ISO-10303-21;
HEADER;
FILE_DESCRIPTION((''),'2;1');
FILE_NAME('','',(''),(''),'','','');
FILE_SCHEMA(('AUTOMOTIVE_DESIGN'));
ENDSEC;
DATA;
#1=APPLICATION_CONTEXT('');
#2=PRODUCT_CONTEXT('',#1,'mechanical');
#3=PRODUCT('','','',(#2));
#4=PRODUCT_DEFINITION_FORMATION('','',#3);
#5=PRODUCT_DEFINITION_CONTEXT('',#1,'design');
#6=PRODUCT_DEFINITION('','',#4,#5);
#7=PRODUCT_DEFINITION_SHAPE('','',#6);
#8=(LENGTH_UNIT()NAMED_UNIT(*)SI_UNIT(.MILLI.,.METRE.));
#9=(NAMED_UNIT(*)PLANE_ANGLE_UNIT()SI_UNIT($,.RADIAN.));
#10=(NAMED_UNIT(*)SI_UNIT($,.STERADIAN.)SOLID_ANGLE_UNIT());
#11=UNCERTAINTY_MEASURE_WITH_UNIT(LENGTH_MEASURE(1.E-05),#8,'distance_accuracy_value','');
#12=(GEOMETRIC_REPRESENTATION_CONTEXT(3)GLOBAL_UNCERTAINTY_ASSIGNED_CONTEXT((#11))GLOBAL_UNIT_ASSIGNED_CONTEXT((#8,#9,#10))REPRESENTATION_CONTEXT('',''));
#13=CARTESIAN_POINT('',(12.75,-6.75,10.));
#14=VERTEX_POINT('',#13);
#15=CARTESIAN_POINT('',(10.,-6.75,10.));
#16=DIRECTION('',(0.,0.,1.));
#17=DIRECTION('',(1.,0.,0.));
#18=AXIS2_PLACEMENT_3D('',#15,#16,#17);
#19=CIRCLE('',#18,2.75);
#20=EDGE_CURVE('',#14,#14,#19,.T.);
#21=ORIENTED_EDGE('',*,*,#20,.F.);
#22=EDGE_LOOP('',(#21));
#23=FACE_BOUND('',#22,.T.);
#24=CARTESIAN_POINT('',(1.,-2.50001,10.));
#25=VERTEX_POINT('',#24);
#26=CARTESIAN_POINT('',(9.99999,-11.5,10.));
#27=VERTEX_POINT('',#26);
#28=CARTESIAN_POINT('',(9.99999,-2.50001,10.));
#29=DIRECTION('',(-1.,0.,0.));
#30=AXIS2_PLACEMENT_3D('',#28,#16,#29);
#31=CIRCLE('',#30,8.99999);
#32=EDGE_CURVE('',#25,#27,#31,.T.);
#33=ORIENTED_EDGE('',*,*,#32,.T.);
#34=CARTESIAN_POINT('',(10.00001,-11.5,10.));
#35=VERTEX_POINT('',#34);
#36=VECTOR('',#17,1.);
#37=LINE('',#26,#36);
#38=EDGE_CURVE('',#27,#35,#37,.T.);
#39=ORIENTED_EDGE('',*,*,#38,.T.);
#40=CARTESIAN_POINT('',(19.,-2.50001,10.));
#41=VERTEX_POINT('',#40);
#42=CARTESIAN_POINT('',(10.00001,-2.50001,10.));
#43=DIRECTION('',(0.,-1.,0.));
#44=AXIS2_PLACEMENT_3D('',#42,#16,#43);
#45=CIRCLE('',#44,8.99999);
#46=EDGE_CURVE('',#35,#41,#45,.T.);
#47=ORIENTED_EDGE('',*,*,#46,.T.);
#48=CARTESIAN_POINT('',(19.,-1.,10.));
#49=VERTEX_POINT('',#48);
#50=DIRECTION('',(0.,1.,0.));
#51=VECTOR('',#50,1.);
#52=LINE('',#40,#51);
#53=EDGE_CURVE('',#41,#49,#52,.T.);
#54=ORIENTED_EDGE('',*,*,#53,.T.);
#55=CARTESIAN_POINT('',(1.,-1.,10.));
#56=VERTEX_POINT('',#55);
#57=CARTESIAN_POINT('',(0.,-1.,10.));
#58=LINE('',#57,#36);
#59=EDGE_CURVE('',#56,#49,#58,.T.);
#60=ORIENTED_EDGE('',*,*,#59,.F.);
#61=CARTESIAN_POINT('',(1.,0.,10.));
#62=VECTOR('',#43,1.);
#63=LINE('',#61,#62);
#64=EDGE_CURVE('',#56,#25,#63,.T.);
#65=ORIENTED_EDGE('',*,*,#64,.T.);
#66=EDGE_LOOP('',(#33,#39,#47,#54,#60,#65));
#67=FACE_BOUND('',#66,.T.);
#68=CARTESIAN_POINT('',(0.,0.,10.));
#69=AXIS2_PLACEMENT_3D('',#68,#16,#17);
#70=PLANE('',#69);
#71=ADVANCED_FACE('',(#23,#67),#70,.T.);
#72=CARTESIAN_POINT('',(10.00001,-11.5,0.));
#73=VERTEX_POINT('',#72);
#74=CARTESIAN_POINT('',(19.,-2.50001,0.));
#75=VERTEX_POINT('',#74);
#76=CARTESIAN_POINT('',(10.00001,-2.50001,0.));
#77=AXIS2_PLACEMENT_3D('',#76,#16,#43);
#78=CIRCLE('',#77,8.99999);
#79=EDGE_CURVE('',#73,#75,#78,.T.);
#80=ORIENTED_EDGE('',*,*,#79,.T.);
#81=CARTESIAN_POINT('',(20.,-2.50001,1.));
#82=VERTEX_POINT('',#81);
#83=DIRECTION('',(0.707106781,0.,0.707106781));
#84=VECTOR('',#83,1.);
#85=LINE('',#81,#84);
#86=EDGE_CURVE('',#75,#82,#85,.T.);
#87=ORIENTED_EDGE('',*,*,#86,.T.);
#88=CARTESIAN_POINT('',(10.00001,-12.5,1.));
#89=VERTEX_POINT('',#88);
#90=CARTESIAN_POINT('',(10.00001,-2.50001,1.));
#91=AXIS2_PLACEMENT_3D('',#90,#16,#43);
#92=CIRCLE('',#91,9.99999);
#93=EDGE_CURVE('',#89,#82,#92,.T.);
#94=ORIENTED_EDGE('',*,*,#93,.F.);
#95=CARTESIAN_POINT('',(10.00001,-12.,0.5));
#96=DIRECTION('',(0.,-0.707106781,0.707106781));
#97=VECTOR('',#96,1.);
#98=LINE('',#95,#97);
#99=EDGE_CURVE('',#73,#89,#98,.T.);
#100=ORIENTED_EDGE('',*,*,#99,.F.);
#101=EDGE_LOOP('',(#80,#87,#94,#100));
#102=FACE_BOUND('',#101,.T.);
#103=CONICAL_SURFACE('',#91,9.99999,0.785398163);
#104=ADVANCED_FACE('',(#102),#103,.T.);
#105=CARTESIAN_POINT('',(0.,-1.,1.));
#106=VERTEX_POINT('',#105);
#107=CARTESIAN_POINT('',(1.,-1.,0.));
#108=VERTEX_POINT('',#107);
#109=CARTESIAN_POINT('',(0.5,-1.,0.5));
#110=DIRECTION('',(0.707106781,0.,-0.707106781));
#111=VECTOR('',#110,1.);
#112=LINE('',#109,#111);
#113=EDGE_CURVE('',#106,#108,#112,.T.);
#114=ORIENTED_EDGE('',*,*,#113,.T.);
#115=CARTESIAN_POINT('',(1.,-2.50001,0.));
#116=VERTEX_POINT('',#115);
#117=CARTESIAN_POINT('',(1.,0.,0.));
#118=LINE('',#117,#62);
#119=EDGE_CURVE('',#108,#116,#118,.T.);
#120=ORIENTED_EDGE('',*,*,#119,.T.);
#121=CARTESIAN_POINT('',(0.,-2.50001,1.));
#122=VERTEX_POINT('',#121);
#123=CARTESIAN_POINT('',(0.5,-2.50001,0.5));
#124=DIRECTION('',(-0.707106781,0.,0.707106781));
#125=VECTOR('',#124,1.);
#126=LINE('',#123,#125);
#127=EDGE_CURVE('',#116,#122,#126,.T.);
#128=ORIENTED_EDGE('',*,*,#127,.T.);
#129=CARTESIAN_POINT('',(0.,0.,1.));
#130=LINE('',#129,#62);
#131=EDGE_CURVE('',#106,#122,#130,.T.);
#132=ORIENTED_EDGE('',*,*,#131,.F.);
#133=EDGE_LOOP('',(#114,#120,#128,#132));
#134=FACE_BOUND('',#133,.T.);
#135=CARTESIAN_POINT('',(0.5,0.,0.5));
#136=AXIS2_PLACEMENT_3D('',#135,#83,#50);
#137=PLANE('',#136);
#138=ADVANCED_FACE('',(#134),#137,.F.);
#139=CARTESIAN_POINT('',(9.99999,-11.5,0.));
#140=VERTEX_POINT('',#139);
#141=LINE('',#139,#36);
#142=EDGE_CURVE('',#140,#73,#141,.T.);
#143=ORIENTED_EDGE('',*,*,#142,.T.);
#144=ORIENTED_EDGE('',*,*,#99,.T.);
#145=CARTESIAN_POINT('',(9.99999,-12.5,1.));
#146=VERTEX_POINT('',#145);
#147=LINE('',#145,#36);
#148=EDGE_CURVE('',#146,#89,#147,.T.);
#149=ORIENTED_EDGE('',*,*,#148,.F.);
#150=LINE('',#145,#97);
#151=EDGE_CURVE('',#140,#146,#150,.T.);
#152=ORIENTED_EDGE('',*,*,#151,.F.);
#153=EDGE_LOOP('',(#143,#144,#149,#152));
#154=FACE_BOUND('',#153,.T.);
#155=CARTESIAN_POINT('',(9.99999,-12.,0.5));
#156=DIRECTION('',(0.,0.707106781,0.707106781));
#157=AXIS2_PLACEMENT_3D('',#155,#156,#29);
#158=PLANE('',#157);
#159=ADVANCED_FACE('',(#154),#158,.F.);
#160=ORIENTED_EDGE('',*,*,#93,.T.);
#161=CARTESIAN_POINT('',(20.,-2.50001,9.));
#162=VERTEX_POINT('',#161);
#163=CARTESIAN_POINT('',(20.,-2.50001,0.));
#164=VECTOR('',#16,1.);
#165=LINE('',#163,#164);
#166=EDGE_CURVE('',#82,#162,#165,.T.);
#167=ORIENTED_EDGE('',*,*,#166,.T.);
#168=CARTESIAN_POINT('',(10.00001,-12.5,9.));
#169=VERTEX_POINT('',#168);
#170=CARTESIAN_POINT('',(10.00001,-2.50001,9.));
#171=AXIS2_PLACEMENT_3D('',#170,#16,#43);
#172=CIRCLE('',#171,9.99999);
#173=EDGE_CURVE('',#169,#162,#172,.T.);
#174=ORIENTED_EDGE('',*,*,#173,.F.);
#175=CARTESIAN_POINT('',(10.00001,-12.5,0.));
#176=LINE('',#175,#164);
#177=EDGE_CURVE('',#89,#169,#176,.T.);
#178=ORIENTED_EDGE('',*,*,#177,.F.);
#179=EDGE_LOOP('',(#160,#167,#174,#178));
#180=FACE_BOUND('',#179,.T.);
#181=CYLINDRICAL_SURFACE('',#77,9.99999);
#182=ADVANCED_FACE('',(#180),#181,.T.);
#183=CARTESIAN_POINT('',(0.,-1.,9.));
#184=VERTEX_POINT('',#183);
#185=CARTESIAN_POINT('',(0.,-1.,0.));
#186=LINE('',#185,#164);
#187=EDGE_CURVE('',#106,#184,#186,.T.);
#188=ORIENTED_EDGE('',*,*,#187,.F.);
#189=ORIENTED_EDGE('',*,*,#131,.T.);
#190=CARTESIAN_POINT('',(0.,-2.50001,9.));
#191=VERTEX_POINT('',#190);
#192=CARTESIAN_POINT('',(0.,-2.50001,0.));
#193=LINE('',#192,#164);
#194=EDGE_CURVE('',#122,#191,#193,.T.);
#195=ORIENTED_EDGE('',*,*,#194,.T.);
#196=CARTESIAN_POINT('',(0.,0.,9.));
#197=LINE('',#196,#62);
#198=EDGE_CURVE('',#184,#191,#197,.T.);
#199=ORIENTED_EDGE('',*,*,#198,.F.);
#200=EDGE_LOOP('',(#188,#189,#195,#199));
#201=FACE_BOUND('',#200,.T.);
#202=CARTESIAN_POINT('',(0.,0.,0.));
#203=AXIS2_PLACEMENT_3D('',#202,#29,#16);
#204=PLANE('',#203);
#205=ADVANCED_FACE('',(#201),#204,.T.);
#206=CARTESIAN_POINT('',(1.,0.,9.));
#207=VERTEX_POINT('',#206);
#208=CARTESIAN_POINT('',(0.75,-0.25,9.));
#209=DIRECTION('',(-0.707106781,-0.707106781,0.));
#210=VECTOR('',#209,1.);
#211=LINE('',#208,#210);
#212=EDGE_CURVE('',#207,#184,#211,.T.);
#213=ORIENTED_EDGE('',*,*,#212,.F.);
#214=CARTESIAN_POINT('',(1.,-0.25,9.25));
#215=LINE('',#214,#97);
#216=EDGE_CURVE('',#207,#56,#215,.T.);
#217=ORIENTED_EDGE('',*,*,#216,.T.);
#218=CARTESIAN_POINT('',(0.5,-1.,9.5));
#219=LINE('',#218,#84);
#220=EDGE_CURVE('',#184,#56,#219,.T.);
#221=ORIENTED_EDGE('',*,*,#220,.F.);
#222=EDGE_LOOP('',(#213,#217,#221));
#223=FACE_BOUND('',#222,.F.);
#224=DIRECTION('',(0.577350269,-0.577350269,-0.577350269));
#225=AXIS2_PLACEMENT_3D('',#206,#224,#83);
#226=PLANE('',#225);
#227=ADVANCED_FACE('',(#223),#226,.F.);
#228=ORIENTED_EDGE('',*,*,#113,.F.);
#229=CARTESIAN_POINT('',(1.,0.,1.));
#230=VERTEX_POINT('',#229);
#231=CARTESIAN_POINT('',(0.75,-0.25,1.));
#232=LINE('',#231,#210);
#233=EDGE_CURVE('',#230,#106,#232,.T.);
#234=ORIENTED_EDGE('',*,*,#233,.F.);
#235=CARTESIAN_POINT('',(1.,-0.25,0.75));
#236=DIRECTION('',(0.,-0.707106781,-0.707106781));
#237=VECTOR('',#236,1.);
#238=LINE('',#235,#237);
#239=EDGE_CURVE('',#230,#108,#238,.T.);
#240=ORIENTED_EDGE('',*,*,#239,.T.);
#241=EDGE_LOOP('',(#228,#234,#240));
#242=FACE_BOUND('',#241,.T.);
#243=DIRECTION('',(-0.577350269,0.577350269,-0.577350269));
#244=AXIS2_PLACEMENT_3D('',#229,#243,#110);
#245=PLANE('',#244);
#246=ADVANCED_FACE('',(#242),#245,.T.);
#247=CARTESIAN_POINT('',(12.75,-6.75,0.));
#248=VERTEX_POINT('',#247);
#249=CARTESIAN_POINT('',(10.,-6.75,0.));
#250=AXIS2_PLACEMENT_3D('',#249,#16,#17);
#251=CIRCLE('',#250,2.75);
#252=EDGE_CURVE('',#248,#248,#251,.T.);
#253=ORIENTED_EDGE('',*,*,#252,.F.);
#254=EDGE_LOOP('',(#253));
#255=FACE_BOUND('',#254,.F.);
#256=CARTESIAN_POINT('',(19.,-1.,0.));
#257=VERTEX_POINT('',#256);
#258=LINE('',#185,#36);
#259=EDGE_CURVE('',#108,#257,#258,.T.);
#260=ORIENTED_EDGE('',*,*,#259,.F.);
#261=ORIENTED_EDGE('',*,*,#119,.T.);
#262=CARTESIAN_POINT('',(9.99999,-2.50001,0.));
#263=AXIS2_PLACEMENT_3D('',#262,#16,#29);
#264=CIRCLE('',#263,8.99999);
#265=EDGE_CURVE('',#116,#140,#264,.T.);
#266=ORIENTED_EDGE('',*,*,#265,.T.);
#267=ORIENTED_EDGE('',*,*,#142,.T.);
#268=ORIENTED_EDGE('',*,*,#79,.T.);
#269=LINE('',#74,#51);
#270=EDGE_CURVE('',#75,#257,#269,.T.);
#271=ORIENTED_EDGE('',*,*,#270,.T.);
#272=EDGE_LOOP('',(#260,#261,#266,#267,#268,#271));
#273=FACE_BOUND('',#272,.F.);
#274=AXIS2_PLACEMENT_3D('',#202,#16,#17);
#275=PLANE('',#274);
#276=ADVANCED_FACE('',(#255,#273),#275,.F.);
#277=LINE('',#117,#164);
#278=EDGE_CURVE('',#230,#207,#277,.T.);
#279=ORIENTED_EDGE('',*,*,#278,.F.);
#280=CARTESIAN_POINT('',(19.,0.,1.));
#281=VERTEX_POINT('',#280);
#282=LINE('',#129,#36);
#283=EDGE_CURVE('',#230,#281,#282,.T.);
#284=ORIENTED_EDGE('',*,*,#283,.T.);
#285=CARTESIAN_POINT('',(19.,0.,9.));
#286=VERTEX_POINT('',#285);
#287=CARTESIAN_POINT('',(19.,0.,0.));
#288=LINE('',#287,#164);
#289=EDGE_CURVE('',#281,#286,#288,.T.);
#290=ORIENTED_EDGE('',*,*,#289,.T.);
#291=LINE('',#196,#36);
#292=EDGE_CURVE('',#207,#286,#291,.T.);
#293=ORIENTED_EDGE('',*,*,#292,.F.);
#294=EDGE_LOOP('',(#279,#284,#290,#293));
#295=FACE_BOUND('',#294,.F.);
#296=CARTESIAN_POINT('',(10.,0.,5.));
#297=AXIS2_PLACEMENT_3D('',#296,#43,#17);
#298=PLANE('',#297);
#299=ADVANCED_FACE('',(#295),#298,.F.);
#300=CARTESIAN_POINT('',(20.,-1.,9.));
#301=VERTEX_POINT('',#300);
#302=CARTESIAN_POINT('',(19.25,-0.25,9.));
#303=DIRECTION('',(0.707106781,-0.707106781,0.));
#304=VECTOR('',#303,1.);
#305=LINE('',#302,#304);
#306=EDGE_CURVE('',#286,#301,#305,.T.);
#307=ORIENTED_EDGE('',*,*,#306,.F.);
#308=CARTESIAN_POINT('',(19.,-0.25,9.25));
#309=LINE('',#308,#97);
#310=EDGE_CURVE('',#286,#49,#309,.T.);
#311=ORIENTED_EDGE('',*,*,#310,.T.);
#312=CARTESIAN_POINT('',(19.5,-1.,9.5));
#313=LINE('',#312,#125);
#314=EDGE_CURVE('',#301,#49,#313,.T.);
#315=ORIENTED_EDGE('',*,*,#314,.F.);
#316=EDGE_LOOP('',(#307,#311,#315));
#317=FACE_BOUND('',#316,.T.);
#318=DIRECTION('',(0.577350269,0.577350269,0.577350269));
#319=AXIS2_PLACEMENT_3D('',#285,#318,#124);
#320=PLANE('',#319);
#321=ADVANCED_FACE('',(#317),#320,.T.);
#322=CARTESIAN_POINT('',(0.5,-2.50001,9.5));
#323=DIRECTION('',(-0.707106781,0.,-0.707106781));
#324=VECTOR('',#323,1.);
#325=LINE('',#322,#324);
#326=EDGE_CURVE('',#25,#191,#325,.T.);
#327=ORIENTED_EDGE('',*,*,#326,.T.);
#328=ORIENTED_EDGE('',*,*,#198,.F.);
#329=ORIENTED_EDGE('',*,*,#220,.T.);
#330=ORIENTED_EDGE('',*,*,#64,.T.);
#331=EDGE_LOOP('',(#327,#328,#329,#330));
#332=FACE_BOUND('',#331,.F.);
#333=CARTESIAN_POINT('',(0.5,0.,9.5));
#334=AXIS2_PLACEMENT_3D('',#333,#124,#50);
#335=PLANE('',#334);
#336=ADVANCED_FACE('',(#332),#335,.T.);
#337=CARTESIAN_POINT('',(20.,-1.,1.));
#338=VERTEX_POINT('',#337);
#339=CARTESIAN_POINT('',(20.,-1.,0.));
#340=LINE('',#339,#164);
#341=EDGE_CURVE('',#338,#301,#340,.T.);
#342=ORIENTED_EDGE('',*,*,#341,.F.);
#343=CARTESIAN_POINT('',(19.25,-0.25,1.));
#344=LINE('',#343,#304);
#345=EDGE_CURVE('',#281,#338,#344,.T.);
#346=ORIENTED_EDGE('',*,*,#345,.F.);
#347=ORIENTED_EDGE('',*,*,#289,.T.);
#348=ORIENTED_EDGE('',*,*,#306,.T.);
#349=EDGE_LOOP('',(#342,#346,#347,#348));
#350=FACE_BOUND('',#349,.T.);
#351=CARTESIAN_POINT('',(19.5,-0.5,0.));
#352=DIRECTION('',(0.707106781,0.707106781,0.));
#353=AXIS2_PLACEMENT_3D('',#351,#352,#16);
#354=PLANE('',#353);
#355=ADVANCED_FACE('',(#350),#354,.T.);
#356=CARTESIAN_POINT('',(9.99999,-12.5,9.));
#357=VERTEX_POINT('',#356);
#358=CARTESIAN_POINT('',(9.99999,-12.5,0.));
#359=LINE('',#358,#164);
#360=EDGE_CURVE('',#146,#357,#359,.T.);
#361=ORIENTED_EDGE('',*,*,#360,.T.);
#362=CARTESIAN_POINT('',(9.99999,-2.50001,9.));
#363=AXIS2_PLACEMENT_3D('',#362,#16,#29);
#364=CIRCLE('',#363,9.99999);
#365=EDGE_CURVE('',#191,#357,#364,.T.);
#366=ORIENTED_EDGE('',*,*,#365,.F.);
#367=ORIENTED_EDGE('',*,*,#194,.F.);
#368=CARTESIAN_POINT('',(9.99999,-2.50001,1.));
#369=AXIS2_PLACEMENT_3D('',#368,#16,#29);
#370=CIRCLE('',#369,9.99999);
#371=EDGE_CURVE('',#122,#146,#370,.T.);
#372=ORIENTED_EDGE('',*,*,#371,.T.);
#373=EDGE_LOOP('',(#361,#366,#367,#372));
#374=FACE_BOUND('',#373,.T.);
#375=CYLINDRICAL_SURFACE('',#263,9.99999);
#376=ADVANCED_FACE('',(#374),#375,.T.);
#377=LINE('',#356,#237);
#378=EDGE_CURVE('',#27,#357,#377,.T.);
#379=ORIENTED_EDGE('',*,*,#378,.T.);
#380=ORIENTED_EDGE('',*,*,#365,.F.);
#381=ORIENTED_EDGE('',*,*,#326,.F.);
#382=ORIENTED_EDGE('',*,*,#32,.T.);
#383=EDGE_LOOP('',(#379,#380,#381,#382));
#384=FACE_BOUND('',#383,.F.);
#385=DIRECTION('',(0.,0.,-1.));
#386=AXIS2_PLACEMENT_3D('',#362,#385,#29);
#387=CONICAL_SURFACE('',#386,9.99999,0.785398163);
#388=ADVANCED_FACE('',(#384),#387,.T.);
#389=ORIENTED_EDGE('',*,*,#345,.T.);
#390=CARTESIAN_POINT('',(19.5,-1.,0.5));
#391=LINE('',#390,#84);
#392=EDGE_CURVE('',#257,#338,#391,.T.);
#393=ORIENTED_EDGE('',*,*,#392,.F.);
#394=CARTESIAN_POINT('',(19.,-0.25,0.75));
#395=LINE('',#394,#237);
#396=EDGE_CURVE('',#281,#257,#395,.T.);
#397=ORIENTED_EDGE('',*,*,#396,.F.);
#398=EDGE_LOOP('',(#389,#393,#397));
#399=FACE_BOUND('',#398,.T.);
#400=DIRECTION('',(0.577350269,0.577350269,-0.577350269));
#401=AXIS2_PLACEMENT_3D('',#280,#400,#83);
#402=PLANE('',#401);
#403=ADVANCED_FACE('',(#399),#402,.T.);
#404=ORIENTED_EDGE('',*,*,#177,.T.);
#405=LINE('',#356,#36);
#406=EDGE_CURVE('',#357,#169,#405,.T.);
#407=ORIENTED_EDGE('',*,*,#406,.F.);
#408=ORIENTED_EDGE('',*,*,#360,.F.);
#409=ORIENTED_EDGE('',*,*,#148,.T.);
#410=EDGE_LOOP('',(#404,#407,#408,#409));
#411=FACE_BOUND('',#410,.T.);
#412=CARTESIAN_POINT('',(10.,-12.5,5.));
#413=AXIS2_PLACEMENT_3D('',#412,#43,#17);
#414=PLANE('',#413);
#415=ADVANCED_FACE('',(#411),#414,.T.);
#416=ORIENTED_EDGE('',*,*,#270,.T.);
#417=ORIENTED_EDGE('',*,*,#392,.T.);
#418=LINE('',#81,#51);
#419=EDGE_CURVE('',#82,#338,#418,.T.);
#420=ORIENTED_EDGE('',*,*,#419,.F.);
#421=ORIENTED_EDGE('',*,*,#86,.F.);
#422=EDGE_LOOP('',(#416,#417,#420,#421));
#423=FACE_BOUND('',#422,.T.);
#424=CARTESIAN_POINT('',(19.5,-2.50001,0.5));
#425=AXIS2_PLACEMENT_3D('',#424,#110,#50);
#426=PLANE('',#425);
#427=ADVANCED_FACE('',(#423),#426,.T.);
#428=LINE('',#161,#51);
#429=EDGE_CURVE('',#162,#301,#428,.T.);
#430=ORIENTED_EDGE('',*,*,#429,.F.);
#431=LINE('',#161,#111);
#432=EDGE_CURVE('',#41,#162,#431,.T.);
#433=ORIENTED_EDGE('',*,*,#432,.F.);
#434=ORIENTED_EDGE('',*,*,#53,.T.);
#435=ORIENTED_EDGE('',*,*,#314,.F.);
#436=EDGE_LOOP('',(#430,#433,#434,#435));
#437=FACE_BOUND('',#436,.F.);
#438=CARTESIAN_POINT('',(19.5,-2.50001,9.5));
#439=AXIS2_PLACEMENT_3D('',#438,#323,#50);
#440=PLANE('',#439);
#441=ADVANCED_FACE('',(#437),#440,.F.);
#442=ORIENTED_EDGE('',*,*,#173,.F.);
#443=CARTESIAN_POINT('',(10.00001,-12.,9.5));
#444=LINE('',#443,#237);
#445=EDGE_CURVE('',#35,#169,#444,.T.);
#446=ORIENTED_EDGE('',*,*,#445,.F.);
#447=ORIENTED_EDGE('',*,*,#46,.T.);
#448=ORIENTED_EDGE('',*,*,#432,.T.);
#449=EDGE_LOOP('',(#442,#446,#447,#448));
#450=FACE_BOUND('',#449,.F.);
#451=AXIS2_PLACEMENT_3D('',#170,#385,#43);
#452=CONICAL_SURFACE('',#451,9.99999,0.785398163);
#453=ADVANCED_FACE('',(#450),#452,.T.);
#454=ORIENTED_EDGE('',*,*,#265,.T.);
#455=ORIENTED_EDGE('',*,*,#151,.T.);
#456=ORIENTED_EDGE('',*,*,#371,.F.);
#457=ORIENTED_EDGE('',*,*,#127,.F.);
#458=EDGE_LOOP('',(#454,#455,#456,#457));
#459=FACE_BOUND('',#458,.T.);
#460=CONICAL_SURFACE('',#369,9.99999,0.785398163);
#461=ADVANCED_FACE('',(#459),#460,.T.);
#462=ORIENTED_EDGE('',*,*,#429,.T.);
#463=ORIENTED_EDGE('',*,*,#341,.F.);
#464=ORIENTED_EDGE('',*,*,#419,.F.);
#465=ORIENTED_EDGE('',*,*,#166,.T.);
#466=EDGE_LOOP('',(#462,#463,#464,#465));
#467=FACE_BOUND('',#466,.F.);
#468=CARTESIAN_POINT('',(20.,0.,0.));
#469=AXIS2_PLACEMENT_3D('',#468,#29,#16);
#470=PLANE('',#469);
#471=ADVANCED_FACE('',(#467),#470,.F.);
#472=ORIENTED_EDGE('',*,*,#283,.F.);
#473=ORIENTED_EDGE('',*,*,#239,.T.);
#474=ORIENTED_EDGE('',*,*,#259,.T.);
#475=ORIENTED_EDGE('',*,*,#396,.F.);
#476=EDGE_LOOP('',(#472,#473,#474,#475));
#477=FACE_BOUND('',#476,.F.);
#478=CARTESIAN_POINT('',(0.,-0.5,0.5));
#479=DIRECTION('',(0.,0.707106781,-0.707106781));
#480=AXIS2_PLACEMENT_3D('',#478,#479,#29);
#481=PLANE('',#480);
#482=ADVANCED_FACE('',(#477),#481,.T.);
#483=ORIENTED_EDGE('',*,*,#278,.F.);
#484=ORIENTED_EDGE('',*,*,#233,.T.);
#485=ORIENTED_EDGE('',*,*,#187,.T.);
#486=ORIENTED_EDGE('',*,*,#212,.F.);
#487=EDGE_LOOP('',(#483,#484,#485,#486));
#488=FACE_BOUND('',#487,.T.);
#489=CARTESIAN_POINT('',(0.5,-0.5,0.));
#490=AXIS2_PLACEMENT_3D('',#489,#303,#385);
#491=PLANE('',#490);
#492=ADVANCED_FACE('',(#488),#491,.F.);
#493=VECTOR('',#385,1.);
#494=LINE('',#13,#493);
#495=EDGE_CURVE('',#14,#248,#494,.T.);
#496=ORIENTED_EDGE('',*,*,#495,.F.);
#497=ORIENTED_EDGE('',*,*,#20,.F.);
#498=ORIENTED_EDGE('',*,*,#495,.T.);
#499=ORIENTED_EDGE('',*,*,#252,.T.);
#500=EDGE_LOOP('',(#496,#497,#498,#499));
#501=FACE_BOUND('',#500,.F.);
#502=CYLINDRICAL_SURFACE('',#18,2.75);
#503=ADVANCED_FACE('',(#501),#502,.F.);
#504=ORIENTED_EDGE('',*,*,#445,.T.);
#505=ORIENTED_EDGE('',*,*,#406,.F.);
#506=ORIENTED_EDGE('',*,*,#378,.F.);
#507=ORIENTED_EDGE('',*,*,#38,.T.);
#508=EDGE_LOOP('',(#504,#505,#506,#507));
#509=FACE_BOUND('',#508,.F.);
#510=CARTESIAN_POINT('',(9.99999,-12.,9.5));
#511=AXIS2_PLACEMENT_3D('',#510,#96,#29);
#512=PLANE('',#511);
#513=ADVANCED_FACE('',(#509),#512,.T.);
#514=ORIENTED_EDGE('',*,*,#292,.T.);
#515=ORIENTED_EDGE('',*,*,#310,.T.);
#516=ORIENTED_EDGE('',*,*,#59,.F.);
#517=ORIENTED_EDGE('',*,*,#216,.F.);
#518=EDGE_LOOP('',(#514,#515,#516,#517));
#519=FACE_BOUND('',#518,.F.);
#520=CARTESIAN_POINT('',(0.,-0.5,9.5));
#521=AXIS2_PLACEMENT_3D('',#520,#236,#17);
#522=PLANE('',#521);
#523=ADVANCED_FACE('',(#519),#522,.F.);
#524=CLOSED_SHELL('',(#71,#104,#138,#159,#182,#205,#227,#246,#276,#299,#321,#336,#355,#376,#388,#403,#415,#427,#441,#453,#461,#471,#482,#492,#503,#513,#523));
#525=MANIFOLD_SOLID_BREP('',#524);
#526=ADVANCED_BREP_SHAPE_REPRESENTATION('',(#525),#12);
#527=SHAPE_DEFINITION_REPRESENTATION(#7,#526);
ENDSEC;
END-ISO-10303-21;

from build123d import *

# Parameters (mm, degrees)
F0_W     = 20
F0_H     = 10
F1_DEPTH = 12.5
F2_R     = 2.75
F3_DEPTH = 10
F4_R     = 9.99999
F5_SIZE  = 1


# Not quite as in the source:
# - a fillet or chamfer is up to 0.001 mm smaller than in the source, because OpenCascade refuses the exact size


with BuildPart() as f1:
    # F0 (on Front) → F1 (new body)
    with BuildSketch(Plane.XZ):
        with Locations((10, 5)):
            Rectangle(F0_W, F0_H)
    extrude(amount=F1_DEPTH)

    # F2 (on face) → F3 (cut, through all)
    with BuildSketch(Plane.XY.offset(10)):
        with Locations((10, -6.75)):
            Circle(F2_R)
    extrude(amount=-F3_DEPTH, mode=Mode.SUBTRACT)

    # F4 (radius 10 in the source; OpenCascade refuses exactly that, so slightly less here)
    f4_edges = [f1.edges().sort_by_distance(p)[0] for p in [
        (0, -12.5, 5),
        (20, -12.5, 5),
    ]]
    fillet(f4_edges, radius=F4_R)

    # F5
    f5_edges = [f1.edges().sort_by_distance(p)[0] for p in [
        (17.071071, -9.571071, 0),
        (10.00001, -12.5, 5),
        (20, -2.50001, 5),
        (17.071071, -9.571071, 10),
        (0, 0, 5),
        (10, 0, 0),
        (20, 0, 5),
        (10, 0, 10),
    ]]
    chamfer(f5_edges, length=F5_SIZE)


solid = f1.part
